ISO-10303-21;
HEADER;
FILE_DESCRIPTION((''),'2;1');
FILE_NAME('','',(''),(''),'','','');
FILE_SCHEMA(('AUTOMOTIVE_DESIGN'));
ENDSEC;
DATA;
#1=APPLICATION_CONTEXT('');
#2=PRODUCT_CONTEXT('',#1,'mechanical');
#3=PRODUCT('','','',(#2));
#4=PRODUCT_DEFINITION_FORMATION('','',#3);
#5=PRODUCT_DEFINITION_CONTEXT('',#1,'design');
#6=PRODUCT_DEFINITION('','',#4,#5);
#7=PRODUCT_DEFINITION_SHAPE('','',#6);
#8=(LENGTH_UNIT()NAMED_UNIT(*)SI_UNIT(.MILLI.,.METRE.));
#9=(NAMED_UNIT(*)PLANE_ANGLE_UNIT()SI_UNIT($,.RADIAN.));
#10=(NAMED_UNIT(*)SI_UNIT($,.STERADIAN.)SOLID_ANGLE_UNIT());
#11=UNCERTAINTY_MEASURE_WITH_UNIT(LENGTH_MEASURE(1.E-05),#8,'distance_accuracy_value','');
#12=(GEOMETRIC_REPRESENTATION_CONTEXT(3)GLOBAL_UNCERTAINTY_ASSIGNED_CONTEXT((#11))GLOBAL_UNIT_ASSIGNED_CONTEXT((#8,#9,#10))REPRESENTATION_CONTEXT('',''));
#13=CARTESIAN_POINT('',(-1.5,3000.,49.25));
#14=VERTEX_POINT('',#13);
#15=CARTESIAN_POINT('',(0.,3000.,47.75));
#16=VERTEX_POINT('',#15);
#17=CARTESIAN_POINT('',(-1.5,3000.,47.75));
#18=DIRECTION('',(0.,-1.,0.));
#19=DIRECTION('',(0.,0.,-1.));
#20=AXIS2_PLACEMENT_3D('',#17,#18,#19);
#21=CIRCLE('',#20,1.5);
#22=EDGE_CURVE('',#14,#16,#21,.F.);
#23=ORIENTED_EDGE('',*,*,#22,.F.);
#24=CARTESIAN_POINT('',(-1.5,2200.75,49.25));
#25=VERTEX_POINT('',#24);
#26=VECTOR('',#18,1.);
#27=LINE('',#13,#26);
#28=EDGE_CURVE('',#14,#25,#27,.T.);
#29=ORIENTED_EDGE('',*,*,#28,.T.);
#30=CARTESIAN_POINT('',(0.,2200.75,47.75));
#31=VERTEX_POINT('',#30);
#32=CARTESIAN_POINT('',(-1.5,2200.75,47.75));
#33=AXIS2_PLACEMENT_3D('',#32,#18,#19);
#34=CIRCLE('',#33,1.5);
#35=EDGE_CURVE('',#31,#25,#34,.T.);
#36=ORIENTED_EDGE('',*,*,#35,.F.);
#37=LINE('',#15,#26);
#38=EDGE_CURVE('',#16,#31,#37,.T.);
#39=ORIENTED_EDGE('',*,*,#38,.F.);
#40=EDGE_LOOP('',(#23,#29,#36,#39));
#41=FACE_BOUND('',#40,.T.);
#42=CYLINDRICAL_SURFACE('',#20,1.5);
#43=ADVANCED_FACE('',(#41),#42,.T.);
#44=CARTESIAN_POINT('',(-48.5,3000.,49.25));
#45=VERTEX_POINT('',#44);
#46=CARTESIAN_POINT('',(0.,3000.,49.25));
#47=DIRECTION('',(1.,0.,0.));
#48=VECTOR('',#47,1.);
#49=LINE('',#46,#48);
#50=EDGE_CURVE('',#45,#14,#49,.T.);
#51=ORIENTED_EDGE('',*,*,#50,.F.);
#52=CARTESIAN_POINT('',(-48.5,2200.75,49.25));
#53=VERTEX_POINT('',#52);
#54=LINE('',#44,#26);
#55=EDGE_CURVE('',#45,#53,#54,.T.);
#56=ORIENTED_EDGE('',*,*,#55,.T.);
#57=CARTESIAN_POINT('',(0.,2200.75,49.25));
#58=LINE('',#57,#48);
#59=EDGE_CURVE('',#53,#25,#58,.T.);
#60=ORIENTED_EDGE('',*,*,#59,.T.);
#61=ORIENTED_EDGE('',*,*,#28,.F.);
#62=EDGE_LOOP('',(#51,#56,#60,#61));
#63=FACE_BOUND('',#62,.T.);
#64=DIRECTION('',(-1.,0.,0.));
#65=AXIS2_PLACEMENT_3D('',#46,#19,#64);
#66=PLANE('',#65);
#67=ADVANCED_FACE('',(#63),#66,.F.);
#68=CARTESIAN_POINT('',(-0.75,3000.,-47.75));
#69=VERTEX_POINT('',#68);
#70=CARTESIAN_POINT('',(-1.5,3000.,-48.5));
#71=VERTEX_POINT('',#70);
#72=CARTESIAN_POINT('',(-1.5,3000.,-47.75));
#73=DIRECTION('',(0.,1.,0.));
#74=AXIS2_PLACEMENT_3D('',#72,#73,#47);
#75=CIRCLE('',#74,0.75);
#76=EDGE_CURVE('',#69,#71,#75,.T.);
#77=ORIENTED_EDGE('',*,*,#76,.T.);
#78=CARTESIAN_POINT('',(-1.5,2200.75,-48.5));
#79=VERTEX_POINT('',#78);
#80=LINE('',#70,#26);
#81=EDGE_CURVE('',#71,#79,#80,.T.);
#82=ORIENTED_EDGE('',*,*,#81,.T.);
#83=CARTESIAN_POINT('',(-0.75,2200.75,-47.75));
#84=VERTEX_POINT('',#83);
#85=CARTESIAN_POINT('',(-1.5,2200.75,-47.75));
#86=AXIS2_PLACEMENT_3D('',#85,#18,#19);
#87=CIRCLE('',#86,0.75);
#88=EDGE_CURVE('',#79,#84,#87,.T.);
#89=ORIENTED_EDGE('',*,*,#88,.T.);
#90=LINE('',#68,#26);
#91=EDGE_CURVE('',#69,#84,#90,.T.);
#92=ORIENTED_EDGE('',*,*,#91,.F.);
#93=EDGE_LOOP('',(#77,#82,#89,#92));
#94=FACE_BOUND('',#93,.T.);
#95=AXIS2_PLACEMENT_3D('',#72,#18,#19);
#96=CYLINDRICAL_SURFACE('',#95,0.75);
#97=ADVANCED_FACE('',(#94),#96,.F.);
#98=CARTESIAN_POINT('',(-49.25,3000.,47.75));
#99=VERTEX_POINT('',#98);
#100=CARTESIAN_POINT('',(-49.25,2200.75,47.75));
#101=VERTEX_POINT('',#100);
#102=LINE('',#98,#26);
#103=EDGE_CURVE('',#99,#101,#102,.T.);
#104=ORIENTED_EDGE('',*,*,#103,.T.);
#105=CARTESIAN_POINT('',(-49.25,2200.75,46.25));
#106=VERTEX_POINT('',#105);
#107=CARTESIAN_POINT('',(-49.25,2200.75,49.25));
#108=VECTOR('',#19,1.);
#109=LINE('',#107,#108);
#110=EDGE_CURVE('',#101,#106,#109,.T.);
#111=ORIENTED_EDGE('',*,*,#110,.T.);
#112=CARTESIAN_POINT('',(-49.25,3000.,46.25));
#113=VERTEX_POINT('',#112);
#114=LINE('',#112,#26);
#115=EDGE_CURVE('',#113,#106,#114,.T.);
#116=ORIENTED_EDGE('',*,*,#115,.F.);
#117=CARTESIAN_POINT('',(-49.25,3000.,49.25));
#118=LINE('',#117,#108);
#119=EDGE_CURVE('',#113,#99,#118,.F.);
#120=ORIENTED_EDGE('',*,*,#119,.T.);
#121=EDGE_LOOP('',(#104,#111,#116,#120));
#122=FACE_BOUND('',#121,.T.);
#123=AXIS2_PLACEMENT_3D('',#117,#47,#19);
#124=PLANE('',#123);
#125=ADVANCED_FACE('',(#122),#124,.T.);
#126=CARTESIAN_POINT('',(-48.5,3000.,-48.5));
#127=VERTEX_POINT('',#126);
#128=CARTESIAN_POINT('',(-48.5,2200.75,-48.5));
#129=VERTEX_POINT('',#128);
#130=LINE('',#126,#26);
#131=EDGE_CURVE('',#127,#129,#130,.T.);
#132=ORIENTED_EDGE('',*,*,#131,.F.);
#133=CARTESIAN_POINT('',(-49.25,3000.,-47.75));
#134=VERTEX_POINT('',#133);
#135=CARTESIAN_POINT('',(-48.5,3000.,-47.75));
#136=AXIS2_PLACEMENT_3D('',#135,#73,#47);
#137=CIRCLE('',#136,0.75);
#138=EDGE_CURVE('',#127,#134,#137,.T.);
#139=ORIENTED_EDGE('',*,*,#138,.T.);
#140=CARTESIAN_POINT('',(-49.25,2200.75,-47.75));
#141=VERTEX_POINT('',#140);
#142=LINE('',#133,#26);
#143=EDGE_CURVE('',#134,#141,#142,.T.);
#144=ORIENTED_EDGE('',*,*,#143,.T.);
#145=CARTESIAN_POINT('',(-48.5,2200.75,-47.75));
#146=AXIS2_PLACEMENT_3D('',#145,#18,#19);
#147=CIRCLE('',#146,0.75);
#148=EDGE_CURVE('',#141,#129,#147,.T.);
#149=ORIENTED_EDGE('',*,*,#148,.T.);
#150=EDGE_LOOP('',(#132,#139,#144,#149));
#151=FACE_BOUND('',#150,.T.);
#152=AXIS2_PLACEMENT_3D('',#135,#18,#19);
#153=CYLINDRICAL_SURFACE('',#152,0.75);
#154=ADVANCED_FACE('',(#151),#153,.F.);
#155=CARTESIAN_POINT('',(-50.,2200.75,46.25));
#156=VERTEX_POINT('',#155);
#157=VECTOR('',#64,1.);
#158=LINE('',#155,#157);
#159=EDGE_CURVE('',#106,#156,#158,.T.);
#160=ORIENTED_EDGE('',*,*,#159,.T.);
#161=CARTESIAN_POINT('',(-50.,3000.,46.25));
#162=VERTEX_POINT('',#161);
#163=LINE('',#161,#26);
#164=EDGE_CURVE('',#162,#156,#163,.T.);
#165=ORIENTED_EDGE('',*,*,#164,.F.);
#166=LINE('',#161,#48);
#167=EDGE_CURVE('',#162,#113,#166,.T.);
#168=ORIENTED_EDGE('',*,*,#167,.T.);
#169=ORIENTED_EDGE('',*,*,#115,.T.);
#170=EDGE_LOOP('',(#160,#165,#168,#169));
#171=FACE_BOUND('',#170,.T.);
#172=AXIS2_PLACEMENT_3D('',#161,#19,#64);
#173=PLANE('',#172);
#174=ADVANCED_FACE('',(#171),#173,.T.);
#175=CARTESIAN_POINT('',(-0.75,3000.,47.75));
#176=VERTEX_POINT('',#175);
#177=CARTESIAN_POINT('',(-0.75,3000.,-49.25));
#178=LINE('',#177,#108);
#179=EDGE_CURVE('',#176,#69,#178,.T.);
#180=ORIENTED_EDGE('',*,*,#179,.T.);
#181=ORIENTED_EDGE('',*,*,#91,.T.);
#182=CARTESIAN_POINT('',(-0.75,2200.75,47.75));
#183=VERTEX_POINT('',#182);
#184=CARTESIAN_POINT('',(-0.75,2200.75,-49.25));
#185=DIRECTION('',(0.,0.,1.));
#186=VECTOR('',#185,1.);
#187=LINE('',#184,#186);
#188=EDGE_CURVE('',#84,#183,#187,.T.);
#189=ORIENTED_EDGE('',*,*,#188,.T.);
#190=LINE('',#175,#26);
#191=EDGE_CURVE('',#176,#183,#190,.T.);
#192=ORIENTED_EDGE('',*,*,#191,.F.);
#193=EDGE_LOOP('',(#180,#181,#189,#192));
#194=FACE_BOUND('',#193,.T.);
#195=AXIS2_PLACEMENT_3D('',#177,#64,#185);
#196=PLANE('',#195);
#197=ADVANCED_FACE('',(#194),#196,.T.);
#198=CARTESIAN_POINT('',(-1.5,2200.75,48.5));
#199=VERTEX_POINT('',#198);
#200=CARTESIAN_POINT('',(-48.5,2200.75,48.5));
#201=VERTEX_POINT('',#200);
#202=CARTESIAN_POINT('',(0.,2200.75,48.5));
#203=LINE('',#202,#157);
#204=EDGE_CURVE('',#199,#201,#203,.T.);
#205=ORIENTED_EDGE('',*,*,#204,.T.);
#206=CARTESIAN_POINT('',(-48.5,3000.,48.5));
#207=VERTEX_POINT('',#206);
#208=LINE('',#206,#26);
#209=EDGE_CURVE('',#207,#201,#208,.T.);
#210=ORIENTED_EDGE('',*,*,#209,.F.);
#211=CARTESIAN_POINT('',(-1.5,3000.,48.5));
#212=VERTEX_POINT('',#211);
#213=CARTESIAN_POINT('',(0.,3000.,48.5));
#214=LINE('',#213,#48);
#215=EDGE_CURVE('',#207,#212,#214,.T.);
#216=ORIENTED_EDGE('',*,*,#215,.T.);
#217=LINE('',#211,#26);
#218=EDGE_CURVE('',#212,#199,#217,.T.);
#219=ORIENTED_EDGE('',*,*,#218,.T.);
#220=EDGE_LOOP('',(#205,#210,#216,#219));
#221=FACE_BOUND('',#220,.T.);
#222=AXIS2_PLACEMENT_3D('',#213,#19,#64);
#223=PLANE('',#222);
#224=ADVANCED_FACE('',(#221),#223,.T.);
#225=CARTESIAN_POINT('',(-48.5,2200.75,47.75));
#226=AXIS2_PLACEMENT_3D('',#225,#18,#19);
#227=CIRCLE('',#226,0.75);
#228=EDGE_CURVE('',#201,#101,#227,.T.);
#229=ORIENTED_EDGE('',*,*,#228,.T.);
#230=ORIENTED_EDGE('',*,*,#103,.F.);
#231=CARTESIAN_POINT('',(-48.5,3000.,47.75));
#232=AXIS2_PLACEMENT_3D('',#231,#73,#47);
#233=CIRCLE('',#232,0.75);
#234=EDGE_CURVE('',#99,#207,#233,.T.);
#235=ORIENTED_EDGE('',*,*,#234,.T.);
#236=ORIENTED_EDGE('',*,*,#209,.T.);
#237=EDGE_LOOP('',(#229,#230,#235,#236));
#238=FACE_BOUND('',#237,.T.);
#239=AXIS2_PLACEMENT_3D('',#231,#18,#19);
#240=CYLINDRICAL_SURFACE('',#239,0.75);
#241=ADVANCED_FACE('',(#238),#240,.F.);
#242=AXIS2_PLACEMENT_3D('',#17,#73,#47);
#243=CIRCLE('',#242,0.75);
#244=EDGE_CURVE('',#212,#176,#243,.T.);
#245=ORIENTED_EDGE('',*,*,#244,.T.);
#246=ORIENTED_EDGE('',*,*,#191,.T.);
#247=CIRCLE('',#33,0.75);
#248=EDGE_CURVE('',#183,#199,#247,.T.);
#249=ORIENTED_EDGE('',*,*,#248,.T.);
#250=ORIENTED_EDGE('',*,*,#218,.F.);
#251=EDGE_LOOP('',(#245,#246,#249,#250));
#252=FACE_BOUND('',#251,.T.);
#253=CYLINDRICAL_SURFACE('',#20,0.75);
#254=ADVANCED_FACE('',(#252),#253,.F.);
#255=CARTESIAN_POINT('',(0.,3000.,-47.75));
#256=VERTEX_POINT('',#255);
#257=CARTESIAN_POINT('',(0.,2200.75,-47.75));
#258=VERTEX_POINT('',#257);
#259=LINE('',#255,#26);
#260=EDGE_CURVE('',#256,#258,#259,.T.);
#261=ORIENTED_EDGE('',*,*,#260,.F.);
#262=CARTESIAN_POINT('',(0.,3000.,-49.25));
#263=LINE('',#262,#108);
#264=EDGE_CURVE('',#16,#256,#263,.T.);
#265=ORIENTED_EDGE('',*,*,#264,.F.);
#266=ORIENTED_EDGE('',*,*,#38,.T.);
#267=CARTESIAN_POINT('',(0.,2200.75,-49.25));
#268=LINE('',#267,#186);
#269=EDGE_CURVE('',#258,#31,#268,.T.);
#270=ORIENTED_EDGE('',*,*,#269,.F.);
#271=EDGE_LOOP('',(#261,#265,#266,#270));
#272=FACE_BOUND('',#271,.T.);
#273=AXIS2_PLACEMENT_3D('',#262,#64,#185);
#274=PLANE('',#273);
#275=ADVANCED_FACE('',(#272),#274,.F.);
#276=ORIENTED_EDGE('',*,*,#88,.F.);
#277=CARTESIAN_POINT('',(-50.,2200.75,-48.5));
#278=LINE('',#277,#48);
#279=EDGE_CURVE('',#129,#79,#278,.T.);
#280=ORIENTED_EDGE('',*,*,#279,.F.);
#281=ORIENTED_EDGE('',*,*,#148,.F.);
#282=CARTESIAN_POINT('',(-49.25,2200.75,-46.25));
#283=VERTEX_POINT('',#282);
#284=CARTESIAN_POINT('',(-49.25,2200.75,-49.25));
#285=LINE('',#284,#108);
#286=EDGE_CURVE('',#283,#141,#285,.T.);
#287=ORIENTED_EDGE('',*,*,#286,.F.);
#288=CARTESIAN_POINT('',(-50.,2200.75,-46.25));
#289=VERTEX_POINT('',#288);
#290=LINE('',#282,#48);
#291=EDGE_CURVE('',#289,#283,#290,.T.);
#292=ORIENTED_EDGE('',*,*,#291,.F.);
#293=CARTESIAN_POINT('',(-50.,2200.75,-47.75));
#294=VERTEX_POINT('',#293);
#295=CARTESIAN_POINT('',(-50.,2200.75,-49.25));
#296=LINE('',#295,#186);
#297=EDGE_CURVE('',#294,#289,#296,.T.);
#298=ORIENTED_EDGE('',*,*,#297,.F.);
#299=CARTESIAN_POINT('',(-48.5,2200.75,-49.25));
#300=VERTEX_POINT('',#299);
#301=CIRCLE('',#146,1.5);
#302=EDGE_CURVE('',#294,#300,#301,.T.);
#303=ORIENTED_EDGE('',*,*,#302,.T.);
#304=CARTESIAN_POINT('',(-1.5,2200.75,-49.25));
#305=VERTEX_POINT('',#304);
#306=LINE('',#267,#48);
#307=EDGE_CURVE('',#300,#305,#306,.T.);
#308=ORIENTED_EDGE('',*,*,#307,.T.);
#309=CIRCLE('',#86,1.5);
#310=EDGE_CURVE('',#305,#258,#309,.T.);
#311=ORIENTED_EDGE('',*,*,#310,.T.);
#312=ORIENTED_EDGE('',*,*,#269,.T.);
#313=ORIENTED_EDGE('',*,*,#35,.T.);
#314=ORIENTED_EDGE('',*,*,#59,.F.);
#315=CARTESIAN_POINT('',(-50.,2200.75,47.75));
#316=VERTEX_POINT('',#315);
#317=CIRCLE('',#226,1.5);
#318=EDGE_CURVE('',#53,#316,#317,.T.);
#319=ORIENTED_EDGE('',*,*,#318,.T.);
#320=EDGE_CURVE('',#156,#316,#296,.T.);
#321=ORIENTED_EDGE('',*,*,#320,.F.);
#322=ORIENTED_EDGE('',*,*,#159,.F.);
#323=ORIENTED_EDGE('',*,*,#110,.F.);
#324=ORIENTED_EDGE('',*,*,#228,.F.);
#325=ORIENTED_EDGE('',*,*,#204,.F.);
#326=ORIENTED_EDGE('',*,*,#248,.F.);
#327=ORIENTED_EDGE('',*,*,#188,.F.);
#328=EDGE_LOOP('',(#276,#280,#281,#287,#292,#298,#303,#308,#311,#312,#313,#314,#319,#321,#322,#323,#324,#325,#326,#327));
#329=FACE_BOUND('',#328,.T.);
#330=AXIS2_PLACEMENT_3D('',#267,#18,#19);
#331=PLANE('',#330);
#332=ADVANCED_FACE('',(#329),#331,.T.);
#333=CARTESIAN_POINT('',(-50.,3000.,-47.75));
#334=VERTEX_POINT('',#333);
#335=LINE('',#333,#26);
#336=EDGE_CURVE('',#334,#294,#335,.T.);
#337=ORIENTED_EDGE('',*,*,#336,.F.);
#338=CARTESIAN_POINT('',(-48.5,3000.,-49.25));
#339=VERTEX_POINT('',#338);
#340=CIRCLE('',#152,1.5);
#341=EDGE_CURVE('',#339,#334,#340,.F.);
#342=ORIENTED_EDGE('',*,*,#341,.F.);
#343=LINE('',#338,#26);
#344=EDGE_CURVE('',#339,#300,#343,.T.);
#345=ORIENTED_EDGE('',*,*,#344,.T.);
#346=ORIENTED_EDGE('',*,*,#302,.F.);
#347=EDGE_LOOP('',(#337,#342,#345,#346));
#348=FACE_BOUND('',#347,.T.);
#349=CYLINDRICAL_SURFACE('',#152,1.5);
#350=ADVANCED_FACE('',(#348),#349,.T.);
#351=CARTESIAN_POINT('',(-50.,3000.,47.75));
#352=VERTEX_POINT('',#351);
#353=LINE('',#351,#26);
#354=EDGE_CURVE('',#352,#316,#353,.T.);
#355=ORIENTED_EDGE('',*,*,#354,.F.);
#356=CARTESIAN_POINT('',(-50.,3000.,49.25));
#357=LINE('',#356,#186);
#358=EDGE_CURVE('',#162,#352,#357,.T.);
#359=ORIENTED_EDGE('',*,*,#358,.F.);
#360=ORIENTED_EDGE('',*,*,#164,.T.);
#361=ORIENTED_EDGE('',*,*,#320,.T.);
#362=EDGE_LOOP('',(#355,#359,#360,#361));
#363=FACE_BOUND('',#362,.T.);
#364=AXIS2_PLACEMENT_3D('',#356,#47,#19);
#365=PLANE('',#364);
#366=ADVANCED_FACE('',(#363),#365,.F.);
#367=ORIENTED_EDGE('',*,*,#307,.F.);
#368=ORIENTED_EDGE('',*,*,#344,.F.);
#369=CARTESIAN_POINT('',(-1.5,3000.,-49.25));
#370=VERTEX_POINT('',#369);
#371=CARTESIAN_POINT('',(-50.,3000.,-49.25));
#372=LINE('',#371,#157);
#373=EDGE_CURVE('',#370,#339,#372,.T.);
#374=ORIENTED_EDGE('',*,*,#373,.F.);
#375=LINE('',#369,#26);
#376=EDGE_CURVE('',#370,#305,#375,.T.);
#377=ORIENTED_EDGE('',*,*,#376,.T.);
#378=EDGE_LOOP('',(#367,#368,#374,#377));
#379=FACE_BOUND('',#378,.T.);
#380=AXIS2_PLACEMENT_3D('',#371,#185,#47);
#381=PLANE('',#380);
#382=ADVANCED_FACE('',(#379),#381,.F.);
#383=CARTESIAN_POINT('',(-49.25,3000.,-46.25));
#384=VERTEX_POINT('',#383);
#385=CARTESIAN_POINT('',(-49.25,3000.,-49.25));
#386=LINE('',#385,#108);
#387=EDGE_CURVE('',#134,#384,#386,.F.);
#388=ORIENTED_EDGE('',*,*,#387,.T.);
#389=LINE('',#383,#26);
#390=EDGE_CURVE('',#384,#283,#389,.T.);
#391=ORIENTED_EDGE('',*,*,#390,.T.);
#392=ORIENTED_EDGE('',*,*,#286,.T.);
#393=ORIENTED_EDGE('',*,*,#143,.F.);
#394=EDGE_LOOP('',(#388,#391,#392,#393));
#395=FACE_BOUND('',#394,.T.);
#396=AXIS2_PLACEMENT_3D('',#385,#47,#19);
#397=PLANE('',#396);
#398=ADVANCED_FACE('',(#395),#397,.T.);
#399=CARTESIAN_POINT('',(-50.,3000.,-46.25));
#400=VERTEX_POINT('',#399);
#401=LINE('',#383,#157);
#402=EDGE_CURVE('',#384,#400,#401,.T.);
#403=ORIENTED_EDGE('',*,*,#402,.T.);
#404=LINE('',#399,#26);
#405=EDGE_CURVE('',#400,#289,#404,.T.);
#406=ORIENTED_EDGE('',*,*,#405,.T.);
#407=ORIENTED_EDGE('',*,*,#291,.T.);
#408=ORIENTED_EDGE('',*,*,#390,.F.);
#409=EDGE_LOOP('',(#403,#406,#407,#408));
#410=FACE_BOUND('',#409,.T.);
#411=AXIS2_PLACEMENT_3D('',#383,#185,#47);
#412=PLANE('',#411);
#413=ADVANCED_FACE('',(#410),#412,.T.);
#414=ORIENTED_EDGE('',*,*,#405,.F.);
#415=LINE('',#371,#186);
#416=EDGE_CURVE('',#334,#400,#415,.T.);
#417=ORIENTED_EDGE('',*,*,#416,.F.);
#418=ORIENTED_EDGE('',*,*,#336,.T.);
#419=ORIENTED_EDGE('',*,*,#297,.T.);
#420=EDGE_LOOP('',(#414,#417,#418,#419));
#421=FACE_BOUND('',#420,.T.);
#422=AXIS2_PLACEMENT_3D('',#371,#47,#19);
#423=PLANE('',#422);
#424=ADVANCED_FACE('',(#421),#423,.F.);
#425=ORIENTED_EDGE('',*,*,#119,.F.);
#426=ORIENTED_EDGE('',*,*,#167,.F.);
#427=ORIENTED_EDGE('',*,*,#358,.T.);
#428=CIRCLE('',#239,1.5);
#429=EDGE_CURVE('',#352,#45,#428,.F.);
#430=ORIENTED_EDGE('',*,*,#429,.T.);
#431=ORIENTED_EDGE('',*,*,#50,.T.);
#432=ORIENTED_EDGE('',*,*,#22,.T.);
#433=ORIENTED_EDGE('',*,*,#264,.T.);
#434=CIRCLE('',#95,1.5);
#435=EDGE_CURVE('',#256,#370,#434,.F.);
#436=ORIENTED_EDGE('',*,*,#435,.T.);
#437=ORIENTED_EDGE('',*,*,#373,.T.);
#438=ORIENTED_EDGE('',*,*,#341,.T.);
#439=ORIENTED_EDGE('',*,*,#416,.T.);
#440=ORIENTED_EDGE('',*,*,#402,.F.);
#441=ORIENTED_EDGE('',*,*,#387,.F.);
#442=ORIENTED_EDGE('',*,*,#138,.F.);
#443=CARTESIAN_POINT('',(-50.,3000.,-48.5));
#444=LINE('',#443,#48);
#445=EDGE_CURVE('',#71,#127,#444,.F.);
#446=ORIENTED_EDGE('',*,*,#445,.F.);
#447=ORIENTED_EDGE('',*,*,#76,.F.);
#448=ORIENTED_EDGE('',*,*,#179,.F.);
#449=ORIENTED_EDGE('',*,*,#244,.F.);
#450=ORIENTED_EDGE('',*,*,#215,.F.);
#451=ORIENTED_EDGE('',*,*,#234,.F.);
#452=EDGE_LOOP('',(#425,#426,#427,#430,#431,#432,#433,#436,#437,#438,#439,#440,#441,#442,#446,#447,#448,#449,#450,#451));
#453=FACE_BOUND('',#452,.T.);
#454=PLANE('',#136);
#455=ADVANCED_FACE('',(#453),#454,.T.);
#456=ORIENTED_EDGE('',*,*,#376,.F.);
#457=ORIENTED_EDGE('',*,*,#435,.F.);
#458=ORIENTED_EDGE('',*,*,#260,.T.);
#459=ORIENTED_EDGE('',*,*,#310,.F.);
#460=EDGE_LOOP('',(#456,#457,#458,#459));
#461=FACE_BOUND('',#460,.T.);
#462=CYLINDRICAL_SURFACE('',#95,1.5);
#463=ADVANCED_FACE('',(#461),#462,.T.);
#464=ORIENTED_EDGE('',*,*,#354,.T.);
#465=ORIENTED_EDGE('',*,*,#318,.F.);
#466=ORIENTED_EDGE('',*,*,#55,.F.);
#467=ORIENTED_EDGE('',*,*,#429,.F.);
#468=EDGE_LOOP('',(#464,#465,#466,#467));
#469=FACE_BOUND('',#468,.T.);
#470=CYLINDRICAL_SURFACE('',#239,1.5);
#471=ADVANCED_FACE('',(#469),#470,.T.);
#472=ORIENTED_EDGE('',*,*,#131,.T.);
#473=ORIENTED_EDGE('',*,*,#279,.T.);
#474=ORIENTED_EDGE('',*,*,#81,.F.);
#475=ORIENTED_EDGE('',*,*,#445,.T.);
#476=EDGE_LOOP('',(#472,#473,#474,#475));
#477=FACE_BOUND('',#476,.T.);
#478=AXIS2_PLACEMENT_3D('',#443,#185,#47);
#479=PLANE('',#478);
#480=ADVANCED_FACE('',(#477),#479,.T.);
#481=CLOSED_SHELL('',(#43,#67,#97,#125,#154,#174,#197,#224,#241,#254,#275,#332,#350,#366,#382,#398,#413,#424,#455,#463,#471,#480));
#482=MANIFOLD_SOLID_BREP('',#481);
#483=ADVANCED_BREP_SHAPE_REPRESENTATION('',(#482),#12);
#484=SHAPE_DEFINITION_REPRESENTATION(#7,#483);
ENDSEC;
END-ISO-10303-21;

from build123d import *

# Parameters (mm, degrees)
MOVE_BODY_2_DEPTH    = 3000
SKETCH_6_OUTSIDE_W   = 652.406
SKETCH_6_OUTSIDE_H   = 3602.406
SKETCH_6_OUTSIDE_W_2 = 50
SKETCH_6_OUTSIDE_H_2 = 799.25
CUT_EXTRUDE_1_DEPTH  = 3003.033019472


# Read off the part's stored shape, not the designer's step: Тело-Переместить/Копировать2
with BuildPart() as part:
    # Move Body 2 outline → Move Body 2 (new body)
    with BuildSketch(Plane(origin=(0, 0, 0), x_dir=(1, 0, 0), z_dir=(0, 1, 0))):
        with BuildLine():
            Line((-50, 47.75), (-50, 46.25))
            Line((-50, 46.25), (-49.25, 46.25))
            Line((-49.25, 46.25), (-49.25, 47.75))
            ThreePointArc((-49.25, 47.75), (-49.030330086, 48.280330086), (-48.5, 48.5))
            Line((-48.5, 48.5), (-1.5, 48.5))
            ThreePointArc((-1.5, 48.5), (-0.969669914, 48.280330086), (-0.75, 47.75))
            Line((-0.75, 47.75), (-0.75, -47.75))
            ThreePointArc((-0.75, -47.75), (-0.969669914, -48.280330086), (-1.5, -48.5))
            Line((-1.5, -48.5), (-48.5, -48.5))
            ThreePointArc((-48.5, -48.5), (-49.030330086, -48.280330086), (-49.25, -47.75))
            Line((-49.25, -47.75), (-49.25, -46.25))
            Line((-49.25, -46.25), (-50, -46.25))
            Line((-50, -46.25), (-50, -47.75))
            ThreePointArc((-50, -47.75), (-49.560660172, -48.810660172), (-48.5, -49.25))
            Line((-48.5, -49.25), (-1.5, -49.25))
            ThreePointArc((-1.5, -49.25), (-0.439339828, -48.810660172), (0, -47.75))
            Line((0, -47.75), (0, 47.75))
            ThreePointArc((0, 47.75), (-0.439339828, 48.810660172), (-1.5, 49.25))
            Line((-1.5, 49.25), (-48.5, 49.25))
            ThreePointArc((-48.5, 49.25), (-49.560660172, 48.810660172), (-50, 47.75))
        make_face()
    extrude(amount=MOVE_BODY_2_DEPTH)

    # Эскиз6 outside → Вырез-Вытянуть1 (cut, through all)
    with BuildSketch(Plane.XY.offset(49.25)):
        with Locations((-25, 1500)):
            Rectangle(SKETCH_6_OUTSIDE_W, SKETCH_6_OUTSIDE_H)
        with Locations((-25, 2600.375)):
            Rectangle(SKETCH_6_OUTSIDE_W_2, SKETCH_6_OUTSIDE_H_2, mode=Mode.SUBTRACT)
    extrude(amount=-CUT_EXTRUDE_1_DEPTH, mode=Mode.SUBTRACT)


solid = part.part
